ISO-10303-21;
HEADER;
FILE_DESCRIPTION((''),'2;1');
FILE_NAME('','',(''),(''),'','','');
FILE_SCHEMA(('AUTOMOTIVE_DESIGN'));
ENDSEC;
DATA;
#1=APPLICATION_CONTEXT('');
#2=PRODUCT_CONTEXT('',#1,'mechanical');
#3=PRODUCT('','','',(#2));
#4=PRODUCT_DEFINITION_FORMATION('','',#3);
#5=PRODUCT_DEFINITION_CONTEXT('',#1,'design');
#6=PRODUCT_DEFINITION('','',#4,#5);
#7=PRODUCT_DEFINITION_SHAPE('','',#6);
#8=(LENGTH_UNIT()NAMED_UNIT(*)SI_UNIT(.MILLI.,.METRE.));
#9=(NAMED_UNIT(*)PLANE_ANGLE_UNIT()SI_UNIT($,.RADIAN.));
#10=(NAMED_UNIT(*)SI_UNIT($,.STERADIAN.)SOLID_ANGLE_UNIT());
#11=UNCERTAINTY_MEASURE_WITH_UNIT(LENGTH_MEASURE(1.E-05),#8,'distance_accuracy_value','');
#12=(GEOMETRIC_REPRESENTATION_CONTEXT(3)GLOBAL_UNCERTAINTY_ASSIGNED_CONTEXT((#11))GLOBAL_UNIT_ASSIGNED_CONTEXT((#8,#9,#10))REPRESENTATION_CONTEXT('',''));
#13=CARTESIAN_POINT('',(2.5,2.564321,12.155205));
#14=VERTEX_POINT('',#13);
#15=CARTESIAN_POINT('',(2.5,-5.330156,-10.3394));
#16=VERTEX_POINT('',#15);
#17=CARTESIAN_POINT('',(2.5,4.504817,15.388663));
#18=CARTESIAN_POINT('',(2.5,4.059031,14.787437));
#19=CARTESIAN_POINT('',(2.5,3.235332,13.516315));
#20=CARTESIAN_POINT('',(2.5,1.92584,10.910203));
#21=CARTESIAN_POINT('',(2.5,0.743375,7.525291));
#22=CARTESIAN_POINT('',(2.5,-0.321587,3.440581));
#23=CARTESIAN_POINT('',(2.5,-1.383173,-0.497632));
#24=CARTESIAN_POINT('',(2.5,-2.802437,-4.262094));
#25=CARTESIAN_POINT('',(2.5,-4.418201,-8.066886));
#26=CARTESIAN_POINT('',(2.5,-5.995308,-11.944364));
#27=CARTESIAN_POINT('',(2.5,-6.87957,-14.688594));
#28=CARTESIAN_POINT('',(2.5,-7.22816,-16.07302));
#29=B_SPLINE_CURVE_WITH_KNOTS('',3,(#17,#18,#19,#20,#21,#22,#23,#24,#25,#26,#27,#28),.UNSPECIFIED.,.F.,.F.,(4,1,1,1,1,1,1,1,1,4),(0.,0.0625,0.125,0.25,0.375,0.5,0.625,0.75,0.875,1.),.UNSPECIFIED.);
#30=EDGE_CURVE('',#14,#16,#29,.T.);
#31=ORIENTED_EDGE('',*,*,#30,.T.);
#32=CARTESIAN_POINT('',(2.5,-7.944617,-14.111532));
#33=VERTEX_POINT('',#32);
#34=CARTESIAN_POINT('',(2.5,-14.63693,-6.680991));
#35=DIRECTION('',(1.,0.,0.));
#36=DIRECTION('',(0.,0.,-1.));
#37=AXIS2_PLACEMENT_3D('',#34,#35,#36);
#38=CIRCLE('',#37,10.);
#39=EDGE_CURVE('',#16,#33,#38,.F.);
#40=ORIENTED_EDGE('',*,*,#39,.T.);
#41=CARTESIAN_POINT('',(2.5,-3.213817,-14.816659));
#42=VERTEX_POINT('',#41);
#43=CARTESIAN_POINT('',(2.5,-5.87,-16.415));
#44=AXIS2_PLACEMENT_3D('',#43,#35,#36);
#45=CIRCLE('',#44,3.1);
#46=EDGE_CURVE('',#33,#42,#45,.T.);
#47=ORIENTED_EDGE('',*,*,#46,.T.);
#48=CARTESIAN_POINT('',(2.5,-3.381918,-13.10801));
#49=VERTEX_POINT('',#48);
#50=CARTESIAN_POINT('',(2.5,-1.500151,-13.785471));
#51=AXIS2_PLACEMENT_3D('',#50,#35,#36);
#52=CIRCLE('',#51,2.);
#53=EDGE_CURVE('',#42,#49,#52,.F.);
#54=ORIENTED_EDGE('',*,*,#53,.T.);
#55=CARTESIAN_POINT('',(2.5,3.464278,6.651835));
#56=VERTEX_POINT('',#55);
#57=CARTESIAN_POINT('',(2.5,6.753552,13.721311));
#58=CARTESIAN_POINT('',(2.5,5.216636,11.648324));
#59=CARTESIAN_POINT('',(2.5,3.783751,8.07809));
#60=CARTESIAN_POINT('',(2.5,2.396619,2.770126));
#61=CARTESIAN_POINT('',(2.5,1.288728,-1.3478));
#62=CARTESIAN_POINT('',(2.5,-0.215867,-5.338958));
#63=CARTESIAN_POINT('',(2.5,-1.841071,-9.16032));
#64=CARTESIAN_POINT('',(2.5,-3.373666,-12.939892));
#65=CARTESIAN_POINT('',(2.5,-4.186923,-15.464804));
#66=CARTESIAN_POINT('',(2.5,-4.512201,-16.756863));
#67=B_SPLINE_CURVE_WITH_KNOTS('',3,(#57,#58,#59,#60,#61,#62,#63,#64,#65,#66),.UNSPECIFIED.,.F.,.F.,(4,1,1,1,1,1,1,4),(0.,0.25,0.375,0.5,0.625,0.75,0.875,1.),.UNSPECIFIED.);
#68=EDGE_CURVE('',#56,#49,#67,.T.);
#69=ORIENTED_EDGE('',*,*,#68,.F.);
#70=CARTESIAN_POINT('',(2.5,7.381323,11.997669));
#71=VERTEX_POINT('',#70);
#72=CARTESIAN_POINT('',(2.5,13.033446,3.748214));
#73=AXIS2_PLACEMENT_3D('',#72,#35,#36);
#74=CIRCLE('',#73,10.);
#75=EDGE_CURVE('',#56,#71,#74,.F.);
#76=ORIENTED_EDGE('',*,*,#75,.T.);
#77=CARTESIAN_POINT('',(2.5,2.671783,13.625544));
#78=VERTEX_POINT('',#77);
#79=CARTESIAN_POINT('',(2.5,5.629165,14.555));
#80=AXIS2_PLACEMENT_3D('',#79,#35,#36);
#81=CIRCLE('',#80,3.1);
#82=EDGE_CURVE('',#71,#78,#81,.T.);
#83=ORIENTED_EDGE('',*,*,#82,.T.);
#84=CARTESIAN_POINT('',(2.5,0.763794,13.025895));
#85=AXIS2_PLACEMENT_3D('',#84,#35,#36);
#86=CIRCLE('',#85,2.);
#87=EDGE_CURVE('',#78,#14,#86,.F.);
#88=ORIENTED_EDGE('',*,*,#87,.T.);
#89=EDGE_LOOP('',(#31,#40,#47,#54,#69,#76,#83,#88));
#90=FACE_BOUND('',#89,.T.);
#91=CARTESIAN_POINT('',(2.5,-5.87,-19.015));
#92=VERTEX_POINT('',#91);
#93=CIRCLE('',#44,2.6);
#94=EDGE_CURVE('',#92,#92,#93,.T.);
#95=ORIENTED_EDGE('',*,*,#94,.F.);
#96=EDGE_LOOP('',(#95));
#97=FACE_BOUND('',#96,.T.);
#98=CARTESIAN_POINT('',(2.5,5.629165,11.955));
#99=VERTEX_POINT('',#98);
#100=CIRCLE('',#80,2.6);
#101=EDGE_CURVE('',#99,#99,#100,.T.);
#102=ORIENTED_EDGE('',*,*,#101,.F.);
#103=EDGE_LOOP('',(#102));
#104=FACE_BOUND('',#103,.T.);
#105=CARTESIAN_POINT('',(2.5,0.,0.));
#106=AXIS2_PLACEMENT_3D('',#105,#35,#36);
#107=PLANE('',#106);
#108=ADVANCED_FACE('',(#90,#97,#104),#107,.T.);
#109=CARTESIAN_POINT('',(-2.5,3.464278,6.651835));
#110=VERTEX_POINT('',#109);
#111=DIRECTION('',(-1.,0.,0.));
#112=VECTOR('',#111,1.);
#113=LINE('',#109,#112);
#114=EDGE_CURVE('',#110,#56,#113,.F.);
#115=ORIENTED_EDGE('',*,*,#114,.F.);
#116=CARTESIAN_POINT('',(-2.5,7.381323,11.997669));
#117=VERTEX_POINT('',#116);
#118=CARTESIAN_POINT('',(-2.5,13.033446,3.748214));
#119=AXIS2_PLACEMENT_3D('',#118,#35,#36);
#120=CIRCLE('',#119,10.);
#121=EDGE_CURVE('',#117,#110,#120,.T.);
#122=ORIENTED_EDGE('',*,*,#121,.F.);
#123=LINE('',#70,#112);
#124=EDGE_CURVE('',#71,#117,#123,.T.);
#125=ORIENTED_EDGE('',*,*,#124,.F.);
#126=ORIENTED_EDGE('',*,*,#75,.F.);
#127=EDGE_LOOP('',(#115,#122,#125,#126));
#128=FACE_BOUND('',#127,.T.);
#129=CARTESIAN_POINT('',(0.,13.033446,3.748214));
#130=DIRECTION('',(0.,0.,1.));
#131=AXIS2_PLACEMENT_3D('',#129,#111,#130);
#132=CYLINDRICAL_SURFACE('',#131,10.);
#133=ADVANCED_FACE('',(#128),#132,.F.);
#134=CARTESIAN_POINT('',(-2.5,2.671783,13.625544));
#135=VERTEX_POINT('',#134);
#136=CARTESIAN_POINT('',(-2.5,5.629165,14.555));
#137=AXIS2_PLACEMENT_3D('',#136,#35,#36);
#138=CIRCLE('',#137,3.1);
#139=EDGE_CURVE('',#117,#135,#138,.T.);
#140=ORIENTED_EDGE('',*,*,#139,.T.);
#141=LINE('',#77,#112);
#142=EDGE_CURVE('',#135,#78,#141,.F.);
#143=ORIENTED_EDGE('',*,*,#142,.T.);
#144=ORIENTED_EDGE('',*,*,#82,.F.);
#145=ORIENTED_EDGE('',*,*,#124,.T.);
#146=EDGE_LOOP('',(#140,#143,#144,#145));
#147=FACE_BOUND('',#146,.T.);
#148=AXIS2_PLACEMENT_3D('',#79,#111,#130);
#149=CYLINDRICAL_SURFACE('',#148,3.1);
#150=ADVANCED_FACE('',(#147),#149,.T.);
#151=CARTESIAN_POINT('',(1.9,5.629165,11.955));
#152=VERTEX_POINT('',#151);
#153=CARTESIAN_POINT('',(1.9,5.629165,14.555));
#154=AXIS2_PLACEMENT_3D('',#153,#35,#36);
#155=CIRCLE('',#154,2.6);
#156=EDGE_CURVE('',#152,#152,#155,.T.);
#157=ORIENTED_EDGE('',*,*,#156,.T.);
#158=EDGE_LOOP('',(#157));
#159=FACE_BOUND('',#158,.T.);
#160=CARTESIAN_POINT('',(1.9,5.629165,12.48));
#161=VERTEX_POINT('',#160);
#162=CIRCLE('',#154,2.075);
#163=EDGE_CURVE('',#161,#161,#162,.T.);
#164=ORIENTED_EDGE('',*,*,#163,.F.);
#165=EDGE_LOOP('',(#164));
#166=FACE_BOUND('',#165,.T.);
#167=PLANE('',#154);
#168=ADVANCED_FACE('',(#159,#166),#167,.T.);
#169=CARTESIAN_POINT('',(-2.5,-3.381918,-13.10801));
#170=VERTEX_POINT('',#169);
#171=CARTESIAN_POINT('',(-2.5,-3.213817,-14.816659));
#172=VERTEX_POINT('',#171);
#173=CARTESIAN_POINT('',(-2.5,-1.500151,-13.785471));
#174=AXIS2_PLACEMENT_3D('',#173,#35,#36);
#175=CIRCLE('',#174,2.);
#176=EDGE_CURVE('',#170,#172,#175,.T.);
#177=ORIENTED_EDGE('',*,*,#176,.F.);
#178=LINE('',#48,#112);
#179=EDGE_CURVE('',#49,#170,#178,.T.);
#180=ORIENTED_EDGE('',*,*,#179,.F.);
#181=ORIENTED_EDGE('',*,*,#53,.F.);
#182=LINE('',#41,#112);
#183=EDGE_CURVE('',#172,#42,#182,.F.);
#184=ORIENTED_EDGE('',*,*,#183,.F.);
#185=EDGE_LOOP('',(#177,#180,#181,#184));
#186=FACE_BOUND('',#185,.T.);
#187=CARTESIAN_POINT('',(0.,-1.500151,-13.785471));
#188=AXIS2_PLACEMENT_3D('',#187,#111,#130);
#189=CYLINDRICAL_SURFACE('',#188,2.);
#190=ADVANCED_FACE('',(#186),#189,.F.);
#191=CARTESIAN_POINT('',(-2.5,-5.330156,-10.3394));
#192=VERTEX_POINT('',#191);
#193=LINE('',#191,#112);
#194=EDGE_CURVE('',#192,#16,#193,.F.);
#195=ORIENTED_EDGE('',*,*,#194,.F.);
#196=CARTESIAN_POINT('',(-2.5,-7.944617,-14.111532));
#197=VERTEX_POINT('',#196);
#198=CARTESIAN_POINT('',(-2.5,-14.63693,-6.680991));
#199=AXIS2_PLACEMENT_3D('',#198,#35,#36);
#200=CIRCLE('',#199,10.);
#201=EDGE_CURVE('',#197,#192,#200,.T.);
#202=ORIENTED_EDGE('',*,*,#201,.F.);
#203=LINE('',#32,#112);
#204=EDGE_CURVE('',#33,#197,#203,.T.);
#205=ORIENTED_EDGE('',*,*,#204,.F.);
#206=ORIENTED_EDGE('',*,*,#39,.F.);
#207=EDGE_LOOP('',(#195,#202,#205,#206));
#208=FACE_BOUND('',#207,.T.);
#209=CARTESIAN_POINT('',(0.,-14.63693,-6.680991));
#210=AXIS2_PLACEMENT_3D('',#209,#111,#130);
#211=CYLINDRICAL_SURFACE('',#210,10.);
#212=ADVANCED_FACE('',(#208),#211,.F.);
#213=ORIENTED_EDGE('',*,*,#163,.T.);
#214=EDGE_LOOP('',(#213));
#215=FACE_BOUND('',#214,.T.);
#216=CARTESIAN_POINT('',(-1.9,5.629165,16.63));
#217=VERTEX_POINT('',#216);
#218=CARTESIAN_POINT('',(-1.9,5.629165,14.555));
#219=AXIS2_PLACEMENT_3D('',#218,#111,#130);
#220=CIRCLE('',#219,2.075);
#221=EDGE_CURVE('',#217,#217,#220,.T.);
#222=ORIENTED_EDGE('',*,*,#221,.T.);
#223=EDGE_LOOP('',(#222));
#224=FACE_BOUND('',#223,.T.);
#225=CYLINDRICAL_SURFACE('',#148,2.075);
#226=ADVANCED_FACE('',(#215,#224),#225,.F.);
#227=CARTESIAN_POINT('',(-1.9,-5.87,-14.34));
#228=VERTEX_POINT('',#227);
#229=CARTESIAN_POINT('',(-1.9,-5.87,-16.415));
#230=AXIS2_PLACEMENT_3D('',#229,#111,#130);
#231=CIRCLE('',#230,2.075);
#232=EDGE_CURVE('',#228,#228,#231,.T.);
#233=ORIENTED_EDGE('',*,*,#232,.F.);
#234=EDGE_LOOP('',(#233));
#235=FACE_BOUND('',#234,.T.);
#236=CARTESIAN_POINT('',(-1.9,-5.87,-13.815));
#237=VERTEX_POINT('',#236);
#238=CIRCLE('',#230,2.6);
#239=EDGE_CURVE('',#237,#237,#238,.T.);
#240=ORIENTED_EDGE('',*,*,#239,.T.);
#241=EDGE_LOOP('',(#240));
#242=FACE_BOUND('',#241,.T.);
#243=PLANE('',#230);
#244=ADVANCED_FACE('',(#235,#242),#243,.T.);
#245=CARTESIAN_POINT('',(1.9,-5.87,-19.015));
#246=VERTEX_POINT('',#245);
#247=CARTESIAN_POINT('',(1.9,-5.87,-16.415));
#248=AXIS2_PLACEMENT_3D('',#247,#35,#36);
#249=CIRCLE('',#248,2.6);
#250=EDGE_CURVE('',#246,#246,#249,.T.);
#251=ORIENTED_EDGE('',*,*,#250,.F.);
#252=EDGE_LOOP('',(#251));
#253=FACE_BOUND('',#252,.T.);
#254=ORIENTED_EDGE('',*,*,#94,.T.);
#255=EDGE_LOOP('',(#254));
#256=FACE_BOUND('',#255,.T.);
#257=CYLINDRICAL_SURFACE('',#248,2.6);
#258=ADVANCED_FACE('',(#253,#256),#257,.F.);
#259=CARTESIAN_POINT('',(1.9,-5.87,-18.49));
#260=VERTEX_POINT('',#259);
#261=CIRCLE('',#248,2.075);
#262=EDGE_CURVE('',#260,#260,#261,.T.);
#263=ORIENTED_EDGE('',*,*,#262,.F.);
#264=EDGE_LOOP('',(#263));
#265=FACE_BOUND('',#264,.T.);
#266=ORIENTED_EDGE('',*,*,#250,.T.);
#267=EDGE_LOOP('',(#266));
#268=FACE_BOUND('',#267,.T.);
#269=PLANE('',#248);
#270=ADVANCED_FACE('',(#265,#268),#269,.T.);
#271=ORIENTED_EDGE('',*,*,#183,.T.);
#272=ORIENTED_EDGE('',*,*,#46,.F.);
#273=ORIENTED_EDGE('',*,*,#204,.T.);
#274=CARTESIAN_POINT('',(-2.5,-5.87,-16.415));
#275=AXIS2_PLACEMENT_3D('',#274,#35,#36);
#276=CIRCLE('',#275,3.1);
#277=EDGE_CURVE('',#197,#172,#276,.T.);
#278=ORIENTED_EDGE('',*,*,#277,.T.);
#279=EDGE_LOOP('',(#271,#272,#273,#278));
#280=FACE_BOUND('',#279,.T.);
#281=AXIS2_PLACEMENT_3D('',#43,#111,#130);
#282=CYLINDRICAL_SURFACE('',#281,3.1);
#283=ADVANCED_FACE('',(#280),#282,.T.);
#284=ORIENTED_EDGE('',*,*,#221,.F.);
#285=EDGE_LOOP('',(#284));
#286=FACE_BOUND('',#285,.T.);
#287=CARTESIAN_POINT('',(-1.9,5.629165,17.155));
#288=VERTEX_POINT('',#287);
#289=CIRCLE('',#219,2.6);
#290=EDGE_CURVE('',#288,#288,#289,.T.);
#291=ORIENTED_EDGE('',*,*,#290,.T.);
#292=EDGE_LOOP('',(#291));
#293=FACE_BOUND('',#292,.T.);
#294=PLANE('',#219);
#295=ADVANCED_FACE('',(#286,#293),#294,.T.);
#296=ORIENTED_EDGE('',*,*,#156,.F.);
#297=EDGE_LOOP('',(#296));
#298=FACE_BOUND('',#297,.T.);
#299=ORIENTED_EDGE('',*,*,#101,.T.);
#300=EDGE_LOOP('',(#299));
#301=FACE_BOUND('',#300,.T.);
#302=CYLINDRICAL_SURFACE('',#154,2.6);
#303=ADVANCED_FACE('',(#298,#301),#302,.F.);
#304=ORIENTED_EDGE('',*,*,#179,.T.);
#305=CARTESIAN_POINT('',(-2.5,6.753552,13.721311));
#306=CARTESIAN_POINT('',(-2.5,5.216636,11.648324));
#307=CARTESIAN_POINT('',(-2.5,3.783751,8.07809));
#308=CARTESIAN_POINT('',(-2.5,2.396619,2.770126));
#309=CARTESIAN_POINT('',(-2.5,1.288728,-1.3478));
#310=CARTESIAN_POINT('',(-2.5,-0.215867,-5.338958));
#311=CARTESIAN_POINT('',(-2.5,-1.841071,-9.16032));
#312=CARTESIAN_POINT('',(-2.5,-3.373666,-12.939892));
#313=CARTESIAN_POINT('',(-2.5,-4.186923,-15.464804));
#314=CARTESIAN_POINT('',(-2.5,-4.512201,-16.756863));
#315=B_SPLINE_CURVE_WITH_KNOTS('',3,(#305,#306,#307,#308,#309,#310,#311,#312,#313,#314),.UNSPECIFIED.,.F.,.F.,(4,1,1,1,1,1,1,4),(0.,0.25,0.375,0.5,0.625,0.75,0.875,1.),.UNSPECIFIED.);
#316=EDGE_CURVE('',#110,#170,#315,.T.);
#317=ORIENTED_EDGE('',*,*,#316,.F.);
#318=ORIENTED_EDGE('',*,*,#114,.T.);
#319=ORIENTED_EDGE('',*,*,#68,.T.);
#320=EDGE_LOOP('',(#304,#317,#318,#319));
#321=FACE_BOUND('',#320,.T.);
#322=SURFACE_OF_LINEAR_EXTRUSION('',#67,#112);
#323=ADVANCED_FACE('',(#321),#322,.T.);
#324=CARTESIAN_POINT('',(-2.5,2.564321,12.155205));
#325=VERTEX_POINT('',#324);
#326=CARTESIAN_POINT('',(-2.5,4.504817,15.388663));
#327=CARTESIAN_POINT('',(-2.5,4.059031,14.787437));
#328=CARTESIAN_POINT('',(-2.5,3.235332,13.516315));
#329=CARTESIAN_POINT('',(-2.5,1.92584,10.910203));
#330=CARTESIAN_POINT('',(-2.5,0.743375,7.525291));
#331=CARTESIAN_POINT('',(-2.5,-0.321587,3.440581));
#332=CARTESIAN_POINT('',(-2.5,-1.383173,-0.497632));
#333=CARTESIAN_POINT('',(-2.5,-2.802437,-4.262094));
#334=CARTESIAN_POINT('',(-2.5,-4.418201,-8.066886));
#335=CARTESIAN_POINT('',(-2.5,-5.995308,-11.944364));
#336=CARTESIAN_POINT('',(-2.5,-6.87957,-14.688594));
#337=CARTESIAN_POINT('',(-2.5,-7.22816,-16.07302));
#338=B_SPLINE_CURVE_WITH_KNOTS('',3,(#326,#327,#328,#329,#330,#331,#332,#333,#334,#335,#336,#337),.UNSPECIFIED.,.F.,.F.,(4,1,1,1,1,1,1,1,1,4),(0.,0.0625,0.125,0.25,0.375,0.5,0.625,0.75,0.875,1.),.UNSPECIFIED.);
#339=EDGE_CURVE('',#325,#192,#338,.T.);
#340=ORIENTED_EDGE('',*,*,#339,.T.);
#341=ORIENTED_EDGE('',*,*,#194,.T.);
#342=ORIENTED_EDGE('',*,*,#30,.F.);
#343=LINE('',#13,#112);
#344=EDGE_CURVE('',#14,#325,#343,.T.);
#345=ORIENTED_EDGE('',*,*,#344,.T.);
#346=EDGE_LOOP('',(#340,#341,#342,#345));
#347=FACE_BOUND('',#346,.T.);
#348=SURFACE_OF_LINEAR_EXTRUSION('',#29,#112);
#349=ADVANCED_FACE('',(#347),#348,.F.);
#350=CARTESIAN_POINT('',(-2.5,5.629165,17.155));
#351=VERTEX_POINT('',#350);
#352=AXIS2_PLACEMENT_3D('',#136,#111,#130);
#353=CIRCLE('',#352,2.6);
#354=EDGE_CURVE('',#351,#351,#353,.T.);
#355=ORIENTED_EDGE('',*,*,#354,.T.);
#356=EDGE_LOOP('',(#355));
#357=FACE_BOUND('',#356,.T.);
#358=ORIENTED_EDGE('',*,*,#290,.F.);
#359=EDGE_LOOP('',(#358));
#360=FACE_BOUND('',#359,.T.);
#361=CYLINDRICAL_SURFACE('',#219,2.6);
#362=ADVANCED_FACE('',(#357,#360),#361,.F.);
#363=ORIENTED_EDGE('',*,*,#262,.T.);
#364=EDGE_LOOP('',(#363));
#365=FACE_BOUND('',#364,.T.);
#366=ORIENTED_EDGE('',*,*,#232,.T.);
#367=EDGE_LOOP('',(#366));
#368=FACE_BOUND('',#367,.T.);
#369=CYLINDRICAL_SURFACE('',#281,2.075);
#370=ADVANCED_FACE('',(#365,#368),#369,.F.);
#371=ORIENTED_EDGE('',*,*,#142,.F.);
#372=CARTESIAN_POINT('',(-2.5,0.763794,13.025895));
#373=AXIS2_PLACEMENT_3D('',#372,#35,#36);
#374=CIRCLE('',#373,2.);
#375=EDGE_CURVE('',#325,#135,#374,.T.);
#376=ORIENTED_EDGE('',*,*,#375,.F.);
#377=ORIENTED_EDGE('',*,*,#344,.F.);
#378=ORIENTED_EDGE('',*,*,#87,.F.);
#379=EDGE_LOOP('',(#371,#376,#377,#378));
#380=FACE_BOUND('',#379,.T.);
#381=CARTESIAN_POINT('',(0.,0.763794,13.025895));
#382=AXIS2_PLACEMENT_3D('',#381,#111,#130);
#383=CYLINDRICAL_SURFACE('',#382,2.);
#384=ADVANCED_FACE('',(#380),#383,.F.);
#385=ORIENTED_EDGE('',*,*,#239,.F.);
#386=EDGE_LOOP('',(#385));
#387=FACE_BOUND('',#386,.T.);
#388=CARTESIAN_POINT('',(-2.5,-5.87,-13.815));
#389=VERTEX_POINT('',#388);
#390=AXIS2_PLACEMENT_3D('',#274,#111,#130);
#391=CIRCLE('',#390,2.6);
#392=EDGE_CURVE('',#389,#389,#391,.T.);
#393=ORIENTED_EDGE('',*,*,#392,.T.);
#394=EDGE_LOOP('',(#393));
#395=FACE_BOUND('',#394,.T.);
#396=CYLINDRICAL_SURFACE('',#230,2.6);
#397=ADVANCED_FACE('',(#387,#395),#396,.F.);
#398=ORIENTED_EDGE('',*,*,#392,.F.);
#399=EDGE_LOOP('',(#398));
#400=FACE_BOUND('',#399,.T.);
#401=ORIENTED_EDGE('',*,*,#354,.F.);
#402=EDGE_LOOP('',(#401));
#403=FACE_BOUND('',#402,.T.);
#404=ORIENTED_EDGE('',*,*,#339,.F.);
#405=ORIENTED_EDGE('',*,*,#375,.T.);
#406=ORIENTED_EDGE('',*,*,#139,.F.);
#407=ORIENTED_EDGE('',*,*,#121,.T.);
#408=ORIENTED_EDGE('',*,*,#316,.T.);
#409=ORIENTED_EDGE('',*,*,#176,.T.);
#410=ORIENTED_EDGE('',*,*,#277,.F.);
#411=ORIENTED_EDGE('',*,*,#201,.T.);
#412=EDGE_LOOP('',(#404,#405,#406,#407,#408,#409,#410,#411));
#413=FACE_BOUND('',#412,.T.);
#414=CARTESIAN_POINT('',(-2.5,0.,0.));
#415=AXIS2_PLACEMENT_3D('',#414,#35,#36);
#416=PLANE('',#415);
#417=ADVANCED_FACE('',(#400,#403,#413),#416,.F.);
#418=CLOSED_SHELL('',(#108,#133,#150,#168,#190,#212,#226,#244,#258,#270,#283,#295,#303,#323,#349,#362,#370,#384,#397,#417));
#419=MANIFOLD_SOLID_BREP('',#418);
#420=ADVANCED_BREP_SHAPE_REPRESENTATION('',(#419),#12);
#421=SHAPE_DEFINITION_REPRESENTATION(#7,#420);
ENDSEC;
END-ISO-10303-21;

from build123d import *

# Parameters (mm, degrees)
BOSS_EXTRUDE1_START     = -2.5
BOSS_EXTRUDE1_OUTLINE_R = 2.075
BOSS_EXTRUDE1_DEPTH     = 5
FILLET1_R               = 10
FILLET2_R               = 2
SKETCH6_R               = 2.6
CUT_EXTRUDE3_DEPTH      = 0.6
CUT_EXTRUDE4_START      = -0.6
SKETCH7_R               = 2.6
CUT_EXTRUDE4_DEPTH      = 0.6


# Read off the part's stored shape, not the designer's step: Boss-Extrude1
with BuildPart() as part:
    # Boss-Extrude1 outline → Boss-Extrude1 (new body)
    with BuildSketch(Plane(origin=(0, 0, 0), x_dir=(0, 0, -1), z_dir=(1, 0, 0)).offset(BOSS_EXTRUDE1_START)):
        with BuildLine():
            add(Edge.make_bspline(
                [(-11.467428758, 5.351849738), (-9.981579618, 4.577281332), (-7.160995192, 3.544086065), (-2.770125707, 2.396619441), (1.347799898, 1.288727674), (5.338957915, -0.215867298), (9.160320461, -1.841071211), (12.08438205, -3.026761323), (13.750853903, -3.610645605), (14.156821659, -3.746175483)],
                knots=[0.086388593, 0.086388593, 0.086388593, 0.086388593, 0.25, 0.375, 0.5, 0.625, 0.75, 0.875, 0.915118366, 0.915118366, 0.915118366, 0.915118366], degree=3))
            ThreePointArc((-11.467428758, 5.351849738), (-17.182273296, 7.274593649), (-12.95766118, 2.972379718))
            add(Edge.make_bspline(
                [(-12.95766118, 2.972379718), (-12.493747453, 2.724314548), (-10.717791227, 1.858624399), (-7.52529105, 0.743374894), (-3.440580849, -0.32158746), (0.497631851, -1.383173076), (4.262093967, -2.802436867), (8.066886426, -4.418200775), (11.094789528, -5.649756293), (12.901972126, -6.280277824), (13.366776805, -6.434212154)],
                knots=[0.08026374, 0.08026374, 0.08026374, 0.08026374, 0.125, 0.25, 0.375, 0.5, 0.625, 0.75, 0.875, 0.917835676, 0.917835676, 0.917835676, 0.917835676], degree=3))
            ThreePointArc((13.366776805, -6.434212154), (19.389198985, -6.744151246), (14.156821659, -3.746175483))
        make_face()
        with Locations((16.415, -5.87)):
            Circle(BOSS_EXTRUDE1_OUTLINE_R, mode=Mode.SUBTRACT)
        with Locations((-14.555, 5.629165125)):
            Circle(BOSS_EXTRUDE1_OUTLINE_R, mode=Mode.SUBTRACT)
    extrude(amount=BOSS_EXTRUDE1_DEPTH)

    # Fillet1
    fillet1_edges = [part.edges().sort_by_distance(p)[0] for p in [
        (0, -6.434212154, -13.366776805),
        (0, 5.351849738, 11.467428758),
    ]]
    fillet(fillet1_edges, radius=FILLET1_R)

    # Fillet2
    fillet2_edges = [part.edges().sort_by_distance(p)[0] for p in [
        (0, -3.746175483, -14.156821659),
        (0, 2.972379718, 12.95766118),
    ]]
    fillet(fillet2_edges, radius=FILLET2_R)

    # Sketch6 → Cut-Extrude3 (cut)
    with BuildSketch(Plane(origin=(2.5, 0, 0), x_dir=(0, 0, -1), z_dir=(1, 0, 0))):
        with Locations((-14.555, 5.629165125)):
            Circle(SKETCH6_R)
        with Locations((16.415, -5.87)):
            Circle(SKETCH6_R)
    extrude(amount=-CUT_EXTRUDE3_DEPTH, mode=Mode.SUBTRACT)

    # Sketch7 → Cut-Extrude4 (cut)
    with BuildSketch(Plane.ZY.offset(2.5).offset(CUT_EXTRUDE4_START)):
        with Locations(Location((14.555, 5.629165125, 0), (0, 0, 180))):
            Circle(SKETCH7_R)
        with Locations(Location((-16.415, -5.87, 0), (0, 0, 180))):
            Circle(SKETCH7_R)
    extrude(amount=CUT_EXTRUDE4_DEPTH, mode=Mode.SUBTRACT)


solid = part.part
